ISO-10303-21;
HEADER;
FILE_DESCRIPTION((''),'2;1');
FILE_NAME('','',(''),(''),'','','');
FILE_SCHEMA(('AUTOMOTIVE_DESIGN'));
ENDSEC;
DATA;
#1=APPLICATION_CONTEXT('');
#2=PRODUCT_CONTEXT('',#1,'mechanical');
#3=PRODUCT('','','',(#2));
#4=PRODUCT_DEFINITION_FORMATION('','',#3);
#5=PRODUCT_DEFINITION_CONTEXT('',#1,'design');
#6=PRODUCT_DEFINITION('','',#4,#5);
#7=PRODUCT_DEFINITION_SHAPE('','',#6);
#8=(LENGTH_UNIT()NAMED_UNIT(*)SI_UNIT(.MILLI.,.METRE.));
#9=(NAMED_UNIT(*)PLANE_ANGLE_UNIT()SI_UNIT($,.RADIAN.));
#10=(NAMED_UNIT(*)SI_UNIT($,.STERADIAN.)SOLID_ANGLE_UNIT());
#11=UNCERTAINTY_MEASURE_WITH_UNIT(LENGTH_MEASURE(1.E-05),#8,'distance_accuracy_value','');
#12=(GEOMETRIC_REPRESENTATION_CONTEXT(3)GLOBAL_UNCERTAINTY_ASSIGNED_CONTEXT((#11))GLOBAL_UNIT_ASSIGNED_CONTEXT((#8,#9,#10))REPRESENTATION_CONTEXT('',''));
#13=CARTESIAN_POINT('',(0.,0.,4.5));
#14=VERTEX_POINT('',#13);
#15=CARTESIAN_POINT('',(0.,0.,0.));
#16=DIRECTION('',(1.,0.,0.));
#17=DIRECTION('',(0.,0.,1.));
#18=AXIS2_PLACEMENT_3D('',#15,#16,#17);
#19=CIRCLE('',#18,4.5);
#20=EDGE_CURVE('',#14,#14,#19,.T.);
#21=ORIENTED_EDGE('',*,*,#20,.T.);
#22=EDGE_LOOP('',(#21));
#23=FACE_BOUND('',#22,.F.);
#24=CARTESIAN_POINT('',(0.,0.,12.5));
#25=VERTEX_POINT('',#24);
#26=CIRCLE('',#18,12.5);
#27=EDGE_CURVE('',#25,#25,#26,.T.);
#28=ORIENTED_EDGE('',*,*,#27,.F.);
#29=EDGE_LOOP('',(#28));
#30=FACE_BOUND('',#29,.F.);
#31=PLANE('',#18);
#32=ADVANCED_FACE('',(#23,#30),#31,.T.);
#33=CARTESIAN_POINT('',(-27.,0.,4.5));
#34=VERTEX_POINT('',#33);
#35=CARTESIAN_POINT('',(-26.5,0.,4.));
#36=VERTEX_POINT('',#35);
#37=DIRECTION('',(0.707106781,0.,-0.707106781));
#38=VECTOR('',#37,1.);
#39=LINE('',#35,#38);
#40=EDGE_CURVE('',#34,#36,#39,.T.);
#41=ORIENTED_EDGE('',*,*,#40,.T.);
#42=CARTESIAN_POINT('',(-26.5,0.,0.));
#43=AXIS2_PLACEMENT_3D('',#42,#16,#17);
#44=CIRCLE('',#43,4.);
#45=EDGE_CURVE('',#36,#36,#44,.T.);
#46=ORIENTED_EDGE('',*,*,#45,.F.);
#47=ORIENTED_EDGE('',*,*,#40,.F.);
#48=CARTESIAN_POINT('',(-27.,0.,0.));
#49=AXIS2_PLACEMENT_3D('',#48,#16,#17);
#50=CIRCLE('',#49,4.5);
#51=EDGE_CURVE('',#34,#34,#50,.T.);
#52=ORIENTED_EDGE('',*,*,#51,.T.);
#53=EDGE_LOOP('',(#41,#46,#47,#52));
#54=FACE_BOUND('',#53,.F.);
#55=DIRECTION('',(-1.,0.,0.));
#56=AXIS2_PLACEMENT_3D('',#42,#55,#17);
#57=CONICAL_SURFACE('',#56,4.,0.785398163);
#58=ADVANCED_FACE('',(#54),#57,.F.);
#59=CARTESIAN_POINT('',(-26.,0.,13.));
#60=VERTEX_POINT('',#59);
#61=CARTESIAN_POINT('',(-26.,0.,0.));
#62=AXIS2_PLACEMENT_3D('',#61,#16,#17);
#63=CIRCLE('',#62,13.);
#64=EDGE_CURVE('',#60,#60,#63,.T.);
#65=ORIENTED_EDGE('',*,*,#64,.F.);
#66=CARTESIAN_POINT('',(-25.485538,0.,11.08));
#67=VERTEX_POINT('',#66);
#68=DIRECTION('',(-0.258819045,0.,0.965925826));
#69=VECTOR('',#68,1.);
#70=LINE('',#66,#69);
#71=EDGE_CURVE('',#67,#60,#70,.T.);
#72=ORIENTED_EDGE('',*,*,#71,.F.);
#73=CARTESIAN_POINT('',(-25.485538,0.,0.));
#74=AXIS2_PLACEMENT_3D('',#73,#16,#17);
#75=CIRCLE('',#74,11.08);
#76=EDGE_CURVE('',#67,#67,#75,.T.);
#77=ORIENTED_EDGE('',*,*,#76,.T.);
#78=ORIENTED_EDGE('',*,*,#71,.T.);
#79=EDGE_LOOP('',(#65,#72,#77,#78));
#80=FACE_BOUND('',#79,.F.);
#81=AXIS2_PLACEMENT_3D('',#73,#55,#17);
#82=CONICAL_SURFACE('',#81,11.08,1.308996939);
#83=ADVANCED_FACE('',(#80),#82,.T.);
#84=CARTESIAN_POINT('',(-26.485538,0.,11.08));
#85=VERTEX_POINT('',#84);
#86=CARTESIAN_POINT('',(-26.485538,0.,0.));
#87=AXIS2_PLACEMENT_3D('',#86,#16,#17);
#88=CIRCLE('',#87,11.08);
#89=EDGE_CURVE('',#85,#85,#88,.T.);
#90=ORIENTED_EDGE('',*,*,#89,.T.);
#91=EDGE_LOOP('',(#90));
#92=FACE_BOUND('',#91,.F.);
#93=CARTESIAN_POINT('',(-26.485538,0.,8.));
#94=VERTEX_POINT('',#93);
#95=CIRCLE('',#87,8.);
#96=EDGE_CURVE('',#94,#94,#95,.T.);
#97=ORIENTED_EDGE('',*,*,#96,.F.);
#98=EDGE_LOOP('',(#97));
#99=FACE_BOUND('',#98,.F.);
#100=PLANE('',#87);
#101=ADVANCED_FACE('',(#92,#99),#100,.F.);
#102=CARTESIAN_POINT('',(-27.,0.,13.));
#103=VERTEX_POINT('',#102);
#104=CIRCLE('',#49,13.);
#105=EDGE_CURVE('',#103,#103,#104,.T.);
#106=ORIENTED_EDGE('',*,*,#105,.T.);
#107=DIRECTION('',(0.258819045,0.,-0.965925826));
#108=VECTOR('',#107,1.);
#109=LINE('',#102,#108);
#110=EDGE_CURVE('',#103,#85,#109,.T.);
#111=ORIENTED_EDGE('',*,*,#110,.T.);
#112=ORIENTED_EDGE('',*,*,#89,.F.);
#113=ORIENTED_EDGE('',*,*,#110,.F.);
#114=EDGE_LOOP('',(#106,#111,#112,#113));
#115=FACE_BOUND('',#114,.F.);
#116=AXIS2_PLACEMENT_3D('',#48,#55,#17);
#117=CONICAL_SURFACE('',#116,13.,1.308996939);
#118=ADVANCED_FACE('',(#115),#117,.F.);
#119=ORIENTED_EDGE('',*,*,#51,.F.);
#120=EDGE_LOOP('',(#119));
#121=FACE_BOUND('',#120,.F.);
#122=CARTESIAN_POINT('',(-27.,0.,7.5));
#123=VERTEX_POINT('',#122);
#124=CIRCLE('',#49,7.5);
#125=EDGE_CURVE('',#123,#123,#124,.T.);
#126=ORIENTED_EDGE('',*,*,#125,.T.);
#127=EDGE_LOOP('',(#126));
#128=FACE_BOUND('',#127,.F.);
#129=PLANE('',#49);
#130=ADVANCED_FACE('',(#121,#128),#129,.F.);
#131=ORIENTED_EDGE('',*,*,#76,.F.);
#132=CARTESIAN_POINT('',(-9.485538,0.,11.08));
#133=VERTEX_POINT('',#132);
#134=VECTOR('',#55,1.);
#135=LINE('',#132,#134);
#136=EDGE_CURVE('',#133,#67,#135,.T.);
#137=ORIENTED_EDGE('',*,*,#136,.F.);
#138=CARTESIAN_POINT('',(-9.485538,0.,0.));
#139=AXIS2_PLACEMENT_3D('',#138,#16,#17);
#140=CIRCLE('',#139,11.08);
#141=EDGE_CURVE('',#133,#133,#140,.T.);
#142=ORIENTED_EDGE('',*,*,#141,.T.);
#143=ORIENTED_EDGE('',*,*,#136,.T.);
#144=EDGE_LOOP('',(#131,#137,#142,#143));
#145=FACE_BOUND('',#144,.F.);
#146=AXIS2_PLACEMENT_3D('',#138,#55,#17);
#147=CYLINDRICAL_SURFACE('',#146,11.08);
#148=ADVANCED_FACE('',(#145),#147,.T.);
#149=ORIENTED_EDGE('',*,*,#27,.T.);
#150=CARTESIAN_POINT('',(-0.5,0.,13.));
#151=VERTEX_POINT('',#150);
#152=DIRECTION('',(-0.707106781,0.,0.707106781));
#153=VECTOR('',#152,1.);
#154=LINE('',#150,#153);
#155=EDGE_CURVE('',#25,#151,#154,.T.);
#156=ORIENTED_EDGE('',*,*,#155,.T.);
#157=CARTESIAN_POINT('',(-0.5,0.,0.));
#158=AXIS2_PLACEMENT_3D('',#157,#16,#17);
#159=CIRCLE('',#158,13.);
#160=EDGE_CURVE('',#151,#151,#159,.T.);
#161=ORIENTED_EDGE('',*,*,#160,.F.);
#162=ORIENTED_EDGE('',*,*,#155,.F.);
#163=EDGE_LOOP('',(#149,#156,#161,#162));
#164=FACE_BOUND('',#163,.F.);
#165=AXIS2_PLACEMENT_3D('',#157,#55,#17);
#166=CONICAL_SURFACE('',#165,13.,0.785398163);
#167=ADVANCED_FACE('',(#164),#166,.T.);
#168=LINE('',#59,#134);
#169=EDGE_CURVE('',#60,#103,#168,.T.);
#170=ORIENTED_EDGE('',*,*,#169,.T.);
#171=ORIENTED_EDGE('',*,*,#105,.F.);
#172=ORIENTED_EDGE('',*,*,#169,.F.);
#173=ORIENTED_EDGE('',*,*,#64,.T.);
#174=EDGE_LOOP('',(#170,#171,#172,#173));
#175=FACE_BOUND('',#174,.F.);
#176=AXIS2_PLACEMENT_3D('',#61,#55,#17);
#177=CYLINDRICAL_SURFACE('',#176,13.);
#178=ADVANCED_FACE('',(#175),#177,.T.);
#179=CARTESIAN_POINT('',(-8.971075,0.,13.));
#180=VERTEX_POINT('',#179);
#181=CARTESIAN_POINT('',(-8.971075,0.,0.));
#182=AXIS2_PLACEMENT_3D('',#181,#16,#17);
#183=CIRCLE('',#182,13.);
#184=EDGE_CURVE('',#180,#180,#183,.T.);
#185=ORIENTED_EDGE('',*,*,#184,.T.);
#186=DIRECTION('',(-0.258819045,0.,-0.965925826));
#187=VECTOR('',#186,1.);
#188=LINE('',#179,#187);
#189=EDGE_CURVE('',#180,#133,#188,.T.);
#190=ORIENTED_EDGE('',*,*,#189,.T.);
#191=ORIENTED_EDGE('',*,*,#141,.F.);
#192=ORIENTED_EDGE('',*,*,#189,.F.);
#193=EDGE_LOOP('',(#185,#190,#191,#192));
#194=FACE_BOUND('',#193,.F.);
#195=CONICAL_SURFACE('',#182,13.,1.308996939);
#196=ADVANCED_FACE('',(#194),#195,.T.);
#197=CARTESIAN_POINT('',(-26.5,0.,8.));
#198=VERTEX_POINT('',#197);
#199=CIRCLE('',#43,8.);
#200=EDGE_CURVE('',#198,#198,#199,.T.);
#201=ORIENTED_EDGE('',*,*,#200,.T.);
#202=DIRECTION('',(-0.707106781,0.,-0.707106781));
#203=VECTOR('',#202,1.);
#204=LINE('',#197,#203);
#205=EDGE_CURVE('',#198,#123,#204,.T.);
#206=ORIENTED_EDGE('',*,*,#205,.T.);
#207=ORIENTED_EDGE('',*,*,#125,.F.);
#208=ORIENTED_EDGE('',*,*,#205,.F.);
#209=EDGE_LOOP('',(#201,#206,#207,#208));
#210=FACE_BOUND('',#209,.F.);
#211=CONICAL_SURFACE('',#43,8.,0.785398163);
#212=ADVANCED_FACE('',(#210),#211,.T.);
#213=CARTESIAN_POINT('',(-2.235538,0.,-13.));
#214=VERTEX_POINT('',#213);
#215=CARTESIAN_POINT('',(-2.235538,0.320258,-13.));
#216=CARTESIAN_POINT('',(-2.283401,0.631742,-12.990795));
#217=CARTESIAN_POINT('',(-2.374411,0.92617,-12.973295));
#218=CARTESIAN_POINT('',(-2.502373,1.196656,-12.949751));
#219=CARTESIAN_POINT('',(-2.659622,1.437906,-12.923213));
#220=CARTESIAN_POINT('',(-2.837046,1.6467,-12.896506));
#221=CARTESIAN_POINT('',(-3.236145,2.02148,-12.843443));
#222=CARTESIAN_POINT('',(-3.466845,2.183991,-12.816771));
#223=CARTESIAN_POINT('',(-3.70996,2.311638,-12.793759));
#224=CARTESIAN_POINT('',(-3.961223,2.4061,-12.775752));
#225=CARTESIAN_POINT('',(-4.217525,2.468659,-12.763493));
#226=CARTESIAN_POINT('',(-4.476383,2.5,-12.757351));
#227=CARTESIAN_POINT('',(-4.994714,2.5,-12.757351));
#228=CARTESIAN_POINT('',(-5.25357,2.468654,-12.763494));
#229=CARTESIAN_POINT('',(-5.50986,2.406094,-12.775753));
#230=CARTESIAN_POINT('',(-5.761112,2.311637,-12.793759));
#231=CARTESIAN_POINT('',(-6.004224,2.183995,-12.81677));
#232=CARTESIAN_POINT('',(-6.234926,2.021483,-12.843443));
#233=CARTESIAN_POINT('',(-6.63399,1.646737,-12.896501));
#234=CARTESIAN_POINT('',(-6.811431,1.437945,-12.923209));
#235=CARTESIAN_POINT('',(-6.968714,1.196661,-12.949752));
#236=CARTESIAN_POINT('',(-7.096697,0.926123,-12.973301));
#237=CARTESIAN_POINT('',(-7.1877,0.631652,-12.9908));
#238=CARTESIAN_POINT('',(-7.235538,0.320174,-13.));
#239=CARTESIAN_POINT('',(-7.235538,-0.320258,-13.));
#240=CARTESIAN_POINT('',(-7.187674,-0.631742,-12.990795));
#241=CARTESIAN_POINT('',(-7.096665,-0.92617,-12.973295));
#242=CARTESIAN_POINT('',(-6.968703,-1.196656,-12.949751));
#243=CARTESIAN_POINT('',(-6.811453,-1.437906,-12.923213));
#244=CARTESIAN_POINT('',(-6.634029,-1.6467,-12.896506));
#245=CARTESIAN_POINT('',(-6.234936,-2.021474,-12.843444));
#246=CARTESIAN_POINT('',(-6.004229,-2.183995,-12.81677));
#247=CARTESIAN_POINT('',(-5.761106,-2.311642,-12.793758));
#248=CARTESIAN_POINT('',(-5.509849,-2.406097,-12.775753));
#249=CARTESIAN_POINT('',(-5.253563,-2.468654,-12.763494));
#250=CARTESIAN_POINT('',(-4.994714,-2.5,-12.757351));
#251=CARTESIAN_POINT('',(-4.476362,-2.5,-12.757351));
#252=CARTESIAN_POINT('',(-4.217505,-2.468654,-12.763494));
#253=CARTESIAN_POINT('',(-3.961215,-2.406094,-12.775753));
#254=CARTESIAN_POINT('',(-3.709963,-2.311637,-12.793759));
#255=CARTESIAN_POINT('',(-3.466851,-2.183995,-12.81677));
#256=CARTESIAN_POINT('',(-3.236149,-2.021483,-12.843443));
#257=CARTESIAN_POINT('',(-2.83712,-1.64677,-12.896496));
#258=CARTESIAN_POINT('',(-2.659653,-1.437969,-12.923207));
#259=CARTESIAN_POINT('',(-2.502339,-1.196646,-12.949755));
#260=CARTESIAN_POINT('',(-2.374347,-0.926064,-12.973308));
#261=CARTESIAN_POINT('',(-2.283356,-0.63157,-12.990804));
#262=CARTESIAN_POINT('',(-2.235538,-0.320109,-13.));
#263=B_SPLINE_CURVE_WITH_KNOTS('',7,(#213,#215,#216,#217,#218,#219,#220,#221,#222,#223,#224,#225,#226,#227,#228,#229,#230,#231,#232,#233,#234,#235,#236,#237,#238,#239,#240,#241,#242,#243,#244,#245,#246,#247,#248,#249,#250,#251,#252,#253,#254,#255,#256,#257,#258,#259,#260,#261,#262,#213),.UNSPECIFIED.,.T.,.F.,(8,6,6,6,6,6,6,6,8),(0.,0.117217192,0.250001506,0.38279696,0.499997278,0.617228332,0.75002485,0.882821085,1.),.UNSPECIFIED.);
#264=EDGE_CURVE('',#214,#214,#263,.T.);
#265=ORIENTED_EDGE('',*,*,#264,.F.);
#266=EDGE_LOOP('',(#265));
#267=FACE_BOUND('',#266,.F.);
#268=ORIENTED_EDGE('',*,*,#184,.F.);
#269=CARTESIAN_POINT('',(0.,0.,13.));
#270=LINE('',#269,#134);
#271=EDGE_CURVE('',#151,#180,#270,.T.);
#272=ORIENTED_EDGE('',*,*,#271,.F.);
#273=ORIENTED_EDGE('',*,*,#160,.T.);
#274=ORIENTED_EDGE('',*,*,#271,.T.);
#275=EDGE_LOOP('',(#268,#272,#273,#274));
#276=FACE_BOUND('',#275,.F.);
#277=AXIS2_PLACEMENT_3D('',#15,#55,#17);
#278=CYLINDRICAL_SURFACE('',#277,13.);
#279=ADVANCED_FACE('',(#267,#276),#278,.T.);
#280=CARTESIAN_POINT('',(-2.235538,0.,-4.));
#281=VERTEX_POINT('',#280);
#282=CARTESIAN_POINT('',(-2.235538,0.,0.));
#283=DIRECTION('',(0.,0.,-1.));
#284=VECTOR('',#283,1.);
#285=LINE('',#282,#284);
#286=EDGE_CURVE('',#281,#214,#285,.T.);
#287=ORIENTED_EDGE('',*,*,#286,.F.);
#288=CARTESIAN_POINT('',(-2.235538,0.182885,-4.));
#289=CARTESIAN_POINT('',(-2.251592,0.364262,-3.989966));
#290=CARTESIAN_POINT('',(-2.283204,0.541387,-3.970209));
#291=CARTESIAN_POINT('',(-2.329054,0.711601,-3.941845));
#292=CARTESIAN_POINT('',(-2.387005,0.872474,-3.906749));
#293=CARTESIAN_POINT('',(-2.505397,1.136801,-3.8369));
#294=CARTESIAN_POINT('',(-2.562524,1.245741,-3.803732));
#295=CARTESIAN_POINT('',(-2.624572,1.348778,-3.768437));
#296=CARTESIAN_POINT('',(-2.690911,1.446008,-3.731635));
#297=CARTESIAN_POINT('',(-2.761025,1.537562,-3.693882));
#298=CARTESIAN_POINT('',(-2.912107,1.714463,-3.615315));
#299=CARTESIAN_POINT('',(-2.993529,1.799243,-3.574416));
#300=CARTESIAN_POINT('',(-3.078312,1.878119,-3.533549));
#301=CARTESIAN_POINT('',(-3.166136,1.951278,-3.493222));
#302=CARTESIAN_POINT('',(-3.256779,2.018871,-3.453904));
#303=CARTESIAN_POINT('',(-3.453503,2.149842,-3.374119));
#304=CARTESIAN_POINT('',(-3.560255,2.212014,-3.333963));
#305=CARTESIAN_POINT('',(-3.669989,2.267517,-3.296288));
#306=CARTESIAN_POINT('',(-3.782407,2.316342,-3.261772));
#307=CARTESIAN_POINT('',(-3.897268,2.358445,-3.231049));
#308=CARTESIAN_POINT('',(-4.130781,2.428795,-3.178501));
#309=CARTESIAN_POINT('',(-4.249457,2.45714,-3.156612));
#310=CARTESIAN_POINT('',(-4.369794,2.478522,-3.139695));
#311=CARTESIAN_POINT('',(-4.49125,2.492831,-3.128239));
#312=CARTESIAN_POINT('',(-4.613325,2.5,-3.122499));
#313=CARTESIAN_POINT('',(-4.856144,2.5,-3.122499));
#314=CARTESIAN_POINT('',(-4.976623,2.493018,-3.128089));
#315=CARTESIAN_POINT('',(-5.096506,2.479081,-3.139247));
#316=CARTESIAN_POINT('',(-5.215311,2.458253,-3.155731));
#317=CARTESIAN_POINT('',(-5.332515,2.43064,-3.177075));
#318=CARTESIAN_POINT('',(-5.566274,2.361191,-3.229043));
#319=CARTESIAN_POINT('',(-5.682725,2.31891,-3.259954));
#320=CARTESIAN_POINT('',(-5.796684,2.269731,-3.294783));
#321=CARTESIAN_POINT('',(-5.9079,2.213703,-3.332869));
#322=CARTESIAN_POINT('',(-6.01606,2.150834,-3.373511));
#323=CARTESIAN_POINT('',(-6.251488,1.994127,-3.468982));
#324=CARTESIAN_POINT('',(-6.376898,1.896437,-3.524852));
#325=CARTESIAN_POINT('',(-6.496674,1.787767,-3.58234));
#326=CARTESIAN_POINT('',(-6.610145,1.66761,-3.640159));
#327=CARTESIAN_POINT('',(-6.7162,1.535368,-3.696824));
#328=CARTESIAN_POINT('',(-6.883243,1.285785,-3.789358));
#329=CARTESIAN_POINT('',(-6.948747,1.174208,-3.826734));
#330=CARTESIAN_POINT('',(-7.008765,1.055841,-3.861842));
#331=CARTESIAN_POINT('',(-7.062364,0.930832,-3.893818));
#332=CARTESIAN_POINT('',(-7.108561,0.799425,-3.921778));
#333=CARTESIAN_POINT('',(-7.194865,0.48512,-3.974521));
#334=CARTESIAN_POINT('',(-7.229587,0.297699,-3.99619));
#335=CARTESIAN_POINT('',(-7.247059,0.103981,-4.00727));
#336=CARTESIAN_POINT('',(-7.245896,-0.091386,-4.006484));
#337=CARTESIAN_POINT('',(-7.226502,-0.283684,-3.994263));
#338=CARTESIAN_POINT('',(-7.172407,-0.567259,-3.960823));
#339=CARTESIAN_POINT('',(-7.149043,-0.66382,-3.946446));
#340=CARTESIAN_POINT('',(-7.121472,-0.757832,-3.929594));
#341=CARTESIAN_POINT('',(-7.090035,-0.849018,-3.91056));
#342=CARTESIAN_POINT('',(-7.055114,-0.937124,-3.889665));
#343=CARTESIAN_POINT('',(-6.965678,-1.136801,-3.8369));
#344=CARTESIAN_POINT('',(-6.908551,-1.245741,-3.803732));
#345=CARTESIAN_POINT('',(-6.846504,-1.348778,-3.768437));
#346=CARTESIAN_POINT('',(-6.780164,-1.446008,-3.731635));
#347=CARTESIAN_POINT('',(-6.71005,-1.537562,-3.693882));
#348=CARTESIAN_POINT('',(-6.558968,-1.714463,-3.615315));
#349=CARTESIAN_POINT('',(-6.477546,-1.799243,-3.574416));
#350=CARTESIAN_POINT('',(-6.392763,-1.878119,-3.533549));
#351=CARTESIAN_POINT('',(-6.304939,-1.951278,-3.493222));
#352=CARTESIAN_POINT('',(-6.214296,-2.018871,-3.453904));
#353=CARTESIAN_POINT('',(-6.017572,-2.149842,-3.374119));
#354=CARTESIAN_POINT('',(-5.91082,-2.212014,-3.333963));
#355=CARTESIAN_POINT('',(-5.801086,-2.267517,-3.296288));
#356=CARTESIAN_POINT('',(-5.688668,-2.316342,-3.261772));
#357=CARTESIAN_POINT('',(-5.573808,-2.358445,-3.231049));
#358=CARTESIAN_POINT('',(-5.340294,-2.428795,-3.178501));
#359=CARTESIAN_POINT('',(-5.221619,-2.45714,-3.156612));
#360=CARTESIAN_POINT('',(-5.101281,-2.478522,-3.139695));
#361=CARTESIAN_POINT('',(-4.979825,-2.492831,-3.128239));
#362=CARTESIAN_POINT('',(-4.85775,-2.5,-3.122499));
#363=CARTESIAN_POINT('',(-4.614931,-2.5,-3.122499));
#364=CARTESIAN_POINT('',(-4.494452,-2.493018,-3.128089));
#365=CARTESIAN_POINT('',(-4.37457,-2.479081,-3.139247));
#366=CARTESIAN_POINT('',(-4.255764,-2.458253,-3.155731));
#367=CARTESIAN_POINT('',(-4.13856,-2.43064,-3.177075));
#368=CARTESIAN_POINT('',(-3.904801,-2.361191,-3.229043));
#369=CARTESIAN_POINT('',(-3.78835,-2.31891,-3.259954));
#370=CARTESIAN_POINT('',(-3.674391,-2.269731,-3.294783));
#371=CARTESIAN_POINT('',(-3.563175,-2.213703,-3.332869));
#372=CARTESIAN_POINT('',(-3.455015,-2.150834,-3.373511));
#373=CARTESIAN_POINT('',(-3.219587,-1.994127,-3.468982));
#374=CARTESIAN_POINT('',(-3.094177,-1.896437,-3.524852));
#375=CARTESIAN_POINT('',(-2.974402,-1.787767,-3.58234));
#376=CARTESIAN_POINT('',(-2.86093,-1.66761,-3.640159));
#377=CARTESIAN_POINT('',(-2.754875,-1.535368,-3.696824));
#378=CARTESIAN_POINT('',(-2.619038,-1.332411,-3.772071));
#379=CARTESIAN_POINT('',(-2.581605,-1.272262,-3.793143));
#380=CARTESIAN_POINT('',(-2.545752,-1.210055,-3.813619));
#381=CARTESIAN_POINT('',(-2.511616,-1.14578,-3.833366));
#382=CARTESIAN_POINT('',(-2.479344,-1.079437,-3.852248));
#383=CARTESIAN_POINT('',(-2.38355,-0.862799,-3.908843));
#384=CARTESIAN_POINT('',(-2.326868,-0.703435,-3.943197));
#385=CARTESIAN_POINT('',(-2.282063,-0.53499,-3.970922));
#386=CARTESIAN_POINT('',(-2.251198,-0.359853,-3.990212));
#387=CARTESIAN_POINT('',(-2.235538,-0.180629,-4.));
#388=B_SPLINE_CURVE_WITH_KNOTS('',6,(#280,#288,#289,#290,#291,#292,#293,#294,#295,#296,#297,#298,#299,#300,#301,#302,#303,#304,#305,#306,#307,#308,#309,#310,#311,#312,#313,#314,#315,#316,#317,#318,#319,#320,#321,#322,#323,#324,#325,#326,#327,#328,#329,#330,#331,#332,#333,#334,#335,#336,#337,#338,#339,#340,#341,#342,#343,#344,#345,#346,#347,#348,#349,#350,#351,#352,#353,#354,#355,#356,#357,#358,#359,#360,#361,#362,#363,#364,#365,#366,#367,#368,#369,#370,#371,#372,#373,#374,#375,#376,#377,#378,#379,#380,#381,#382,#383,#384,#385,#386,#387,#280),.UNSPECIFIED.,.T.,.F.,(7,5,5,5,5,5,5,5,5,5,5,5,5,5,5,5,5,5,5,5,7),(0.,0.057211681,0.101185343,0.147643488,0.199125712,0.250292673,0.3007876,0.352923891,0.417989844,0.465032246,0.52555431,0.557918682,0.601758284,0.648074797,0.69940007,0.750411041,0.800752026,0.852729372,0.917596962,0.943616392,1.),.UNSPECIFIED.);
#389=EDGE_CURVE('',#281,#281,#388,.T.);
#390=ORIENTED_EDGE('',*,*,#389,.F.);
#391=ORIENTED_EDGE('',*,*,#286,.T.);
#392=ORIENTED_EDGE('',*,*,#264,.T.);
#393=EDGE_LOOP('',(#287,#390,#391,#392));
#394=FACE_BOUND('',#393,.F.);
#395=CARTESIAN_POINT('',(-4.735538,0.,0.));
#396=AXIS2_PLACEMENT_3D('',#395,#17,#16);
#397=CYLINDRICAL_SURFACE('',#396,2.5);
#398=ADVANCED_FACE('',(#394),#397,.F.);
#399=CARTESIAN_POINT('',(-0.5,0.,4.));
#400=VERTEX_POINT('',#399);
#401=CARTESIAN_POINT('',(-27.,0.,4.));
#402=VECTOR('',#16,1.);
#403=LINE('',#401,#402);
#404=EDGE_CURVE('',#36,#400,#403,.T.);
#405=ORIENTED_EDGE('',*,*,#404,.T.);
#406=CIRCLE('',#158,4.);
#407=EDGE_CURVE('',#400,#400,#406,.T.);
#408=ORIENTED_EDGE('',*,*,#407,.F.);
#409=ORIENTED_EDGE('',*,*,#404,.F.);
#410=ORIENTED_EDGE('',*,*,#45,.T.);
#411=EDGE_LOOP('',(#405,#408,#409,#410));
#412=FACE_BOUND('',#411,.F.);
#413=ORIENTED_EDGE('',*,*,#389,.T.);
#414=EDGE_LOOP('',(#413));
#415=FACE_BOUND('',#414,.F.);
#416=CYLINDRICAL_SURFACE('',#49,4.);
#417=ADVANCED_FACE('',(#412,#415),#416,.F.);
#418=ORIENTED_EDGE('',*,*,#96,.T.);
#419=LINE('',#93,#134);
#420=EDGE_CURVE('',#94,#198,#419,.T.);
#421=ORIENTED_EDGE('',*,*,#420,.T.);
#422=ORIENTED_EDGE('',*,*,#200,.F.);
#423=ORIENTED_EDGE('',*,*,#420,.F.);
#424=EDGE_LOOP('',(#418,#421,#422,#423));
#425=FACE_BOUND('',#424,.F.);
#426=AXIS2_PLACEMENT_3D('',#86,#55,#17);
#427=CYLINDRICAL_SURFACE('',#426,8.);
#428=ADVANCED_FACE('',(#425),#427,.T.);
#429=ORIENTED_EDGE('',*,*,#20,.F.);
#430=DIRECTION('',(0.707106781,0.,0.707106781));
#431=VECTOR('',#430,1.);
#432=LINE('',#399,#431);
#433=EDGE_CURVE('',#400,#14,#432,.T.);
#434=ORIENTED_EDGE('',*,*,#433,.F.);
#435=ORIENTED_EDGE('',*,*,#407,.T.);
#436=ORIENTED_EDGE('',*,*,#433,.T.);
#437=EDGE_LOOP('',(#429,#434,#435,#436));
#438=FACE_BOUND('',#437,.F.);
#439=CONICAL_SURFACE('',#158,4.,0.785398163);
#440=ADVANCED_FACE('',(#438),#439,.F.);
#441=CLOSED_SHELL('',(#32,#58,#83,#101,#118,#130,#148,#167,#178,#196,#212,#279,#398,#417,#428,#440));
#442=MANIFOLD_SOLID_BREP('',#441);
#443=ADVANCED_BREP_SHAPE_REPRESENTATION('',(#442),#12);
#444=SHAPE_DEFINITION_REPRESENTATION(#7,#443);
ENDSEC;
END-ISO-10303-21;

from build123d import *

# Parameters (mm, degrees)
F2_SIZE  = 0.5
F4_D     = 5
F4_DEPTH = 13.001


with BuildPart() as f1:
    # F0 (on Front) → F1 (revolve)
    with BuildSketch(Plane.XZ):
        Polygon((-8.9710751011, 13), (-9.4855375505, 11.08), (-25.4855375505, 11.08), (-26, 13), (-27, 13), (-26.4855375505, 11.08), (-26.4855375505, 8), (-27, 8), (-27, 4), (0, 4), (0, 13), align=None)
    revolve(axis=Axis((-13.5, 0, 0), (1, 0, 0)))

    # F2
    f2_edges = [f1.edges().sort_by_distance(p)[0] for p in [
        (0, 0, -4),
        (0, 0, -13),
        (-27, 0, -8),
        (-27, 0, -4),
    ]]
    chamfer(f2_edges, length=F2_SIZE)

    # F4 (through all, one way)
    with BuildSketch(Plane.XY):
        with Locations((-4.7355375505, 0)):
            Circle(F4_D / 2)
    extrude(amount=-F4_DEPTH, mode=Mode.SUBTRACT)


solid = f1.part
